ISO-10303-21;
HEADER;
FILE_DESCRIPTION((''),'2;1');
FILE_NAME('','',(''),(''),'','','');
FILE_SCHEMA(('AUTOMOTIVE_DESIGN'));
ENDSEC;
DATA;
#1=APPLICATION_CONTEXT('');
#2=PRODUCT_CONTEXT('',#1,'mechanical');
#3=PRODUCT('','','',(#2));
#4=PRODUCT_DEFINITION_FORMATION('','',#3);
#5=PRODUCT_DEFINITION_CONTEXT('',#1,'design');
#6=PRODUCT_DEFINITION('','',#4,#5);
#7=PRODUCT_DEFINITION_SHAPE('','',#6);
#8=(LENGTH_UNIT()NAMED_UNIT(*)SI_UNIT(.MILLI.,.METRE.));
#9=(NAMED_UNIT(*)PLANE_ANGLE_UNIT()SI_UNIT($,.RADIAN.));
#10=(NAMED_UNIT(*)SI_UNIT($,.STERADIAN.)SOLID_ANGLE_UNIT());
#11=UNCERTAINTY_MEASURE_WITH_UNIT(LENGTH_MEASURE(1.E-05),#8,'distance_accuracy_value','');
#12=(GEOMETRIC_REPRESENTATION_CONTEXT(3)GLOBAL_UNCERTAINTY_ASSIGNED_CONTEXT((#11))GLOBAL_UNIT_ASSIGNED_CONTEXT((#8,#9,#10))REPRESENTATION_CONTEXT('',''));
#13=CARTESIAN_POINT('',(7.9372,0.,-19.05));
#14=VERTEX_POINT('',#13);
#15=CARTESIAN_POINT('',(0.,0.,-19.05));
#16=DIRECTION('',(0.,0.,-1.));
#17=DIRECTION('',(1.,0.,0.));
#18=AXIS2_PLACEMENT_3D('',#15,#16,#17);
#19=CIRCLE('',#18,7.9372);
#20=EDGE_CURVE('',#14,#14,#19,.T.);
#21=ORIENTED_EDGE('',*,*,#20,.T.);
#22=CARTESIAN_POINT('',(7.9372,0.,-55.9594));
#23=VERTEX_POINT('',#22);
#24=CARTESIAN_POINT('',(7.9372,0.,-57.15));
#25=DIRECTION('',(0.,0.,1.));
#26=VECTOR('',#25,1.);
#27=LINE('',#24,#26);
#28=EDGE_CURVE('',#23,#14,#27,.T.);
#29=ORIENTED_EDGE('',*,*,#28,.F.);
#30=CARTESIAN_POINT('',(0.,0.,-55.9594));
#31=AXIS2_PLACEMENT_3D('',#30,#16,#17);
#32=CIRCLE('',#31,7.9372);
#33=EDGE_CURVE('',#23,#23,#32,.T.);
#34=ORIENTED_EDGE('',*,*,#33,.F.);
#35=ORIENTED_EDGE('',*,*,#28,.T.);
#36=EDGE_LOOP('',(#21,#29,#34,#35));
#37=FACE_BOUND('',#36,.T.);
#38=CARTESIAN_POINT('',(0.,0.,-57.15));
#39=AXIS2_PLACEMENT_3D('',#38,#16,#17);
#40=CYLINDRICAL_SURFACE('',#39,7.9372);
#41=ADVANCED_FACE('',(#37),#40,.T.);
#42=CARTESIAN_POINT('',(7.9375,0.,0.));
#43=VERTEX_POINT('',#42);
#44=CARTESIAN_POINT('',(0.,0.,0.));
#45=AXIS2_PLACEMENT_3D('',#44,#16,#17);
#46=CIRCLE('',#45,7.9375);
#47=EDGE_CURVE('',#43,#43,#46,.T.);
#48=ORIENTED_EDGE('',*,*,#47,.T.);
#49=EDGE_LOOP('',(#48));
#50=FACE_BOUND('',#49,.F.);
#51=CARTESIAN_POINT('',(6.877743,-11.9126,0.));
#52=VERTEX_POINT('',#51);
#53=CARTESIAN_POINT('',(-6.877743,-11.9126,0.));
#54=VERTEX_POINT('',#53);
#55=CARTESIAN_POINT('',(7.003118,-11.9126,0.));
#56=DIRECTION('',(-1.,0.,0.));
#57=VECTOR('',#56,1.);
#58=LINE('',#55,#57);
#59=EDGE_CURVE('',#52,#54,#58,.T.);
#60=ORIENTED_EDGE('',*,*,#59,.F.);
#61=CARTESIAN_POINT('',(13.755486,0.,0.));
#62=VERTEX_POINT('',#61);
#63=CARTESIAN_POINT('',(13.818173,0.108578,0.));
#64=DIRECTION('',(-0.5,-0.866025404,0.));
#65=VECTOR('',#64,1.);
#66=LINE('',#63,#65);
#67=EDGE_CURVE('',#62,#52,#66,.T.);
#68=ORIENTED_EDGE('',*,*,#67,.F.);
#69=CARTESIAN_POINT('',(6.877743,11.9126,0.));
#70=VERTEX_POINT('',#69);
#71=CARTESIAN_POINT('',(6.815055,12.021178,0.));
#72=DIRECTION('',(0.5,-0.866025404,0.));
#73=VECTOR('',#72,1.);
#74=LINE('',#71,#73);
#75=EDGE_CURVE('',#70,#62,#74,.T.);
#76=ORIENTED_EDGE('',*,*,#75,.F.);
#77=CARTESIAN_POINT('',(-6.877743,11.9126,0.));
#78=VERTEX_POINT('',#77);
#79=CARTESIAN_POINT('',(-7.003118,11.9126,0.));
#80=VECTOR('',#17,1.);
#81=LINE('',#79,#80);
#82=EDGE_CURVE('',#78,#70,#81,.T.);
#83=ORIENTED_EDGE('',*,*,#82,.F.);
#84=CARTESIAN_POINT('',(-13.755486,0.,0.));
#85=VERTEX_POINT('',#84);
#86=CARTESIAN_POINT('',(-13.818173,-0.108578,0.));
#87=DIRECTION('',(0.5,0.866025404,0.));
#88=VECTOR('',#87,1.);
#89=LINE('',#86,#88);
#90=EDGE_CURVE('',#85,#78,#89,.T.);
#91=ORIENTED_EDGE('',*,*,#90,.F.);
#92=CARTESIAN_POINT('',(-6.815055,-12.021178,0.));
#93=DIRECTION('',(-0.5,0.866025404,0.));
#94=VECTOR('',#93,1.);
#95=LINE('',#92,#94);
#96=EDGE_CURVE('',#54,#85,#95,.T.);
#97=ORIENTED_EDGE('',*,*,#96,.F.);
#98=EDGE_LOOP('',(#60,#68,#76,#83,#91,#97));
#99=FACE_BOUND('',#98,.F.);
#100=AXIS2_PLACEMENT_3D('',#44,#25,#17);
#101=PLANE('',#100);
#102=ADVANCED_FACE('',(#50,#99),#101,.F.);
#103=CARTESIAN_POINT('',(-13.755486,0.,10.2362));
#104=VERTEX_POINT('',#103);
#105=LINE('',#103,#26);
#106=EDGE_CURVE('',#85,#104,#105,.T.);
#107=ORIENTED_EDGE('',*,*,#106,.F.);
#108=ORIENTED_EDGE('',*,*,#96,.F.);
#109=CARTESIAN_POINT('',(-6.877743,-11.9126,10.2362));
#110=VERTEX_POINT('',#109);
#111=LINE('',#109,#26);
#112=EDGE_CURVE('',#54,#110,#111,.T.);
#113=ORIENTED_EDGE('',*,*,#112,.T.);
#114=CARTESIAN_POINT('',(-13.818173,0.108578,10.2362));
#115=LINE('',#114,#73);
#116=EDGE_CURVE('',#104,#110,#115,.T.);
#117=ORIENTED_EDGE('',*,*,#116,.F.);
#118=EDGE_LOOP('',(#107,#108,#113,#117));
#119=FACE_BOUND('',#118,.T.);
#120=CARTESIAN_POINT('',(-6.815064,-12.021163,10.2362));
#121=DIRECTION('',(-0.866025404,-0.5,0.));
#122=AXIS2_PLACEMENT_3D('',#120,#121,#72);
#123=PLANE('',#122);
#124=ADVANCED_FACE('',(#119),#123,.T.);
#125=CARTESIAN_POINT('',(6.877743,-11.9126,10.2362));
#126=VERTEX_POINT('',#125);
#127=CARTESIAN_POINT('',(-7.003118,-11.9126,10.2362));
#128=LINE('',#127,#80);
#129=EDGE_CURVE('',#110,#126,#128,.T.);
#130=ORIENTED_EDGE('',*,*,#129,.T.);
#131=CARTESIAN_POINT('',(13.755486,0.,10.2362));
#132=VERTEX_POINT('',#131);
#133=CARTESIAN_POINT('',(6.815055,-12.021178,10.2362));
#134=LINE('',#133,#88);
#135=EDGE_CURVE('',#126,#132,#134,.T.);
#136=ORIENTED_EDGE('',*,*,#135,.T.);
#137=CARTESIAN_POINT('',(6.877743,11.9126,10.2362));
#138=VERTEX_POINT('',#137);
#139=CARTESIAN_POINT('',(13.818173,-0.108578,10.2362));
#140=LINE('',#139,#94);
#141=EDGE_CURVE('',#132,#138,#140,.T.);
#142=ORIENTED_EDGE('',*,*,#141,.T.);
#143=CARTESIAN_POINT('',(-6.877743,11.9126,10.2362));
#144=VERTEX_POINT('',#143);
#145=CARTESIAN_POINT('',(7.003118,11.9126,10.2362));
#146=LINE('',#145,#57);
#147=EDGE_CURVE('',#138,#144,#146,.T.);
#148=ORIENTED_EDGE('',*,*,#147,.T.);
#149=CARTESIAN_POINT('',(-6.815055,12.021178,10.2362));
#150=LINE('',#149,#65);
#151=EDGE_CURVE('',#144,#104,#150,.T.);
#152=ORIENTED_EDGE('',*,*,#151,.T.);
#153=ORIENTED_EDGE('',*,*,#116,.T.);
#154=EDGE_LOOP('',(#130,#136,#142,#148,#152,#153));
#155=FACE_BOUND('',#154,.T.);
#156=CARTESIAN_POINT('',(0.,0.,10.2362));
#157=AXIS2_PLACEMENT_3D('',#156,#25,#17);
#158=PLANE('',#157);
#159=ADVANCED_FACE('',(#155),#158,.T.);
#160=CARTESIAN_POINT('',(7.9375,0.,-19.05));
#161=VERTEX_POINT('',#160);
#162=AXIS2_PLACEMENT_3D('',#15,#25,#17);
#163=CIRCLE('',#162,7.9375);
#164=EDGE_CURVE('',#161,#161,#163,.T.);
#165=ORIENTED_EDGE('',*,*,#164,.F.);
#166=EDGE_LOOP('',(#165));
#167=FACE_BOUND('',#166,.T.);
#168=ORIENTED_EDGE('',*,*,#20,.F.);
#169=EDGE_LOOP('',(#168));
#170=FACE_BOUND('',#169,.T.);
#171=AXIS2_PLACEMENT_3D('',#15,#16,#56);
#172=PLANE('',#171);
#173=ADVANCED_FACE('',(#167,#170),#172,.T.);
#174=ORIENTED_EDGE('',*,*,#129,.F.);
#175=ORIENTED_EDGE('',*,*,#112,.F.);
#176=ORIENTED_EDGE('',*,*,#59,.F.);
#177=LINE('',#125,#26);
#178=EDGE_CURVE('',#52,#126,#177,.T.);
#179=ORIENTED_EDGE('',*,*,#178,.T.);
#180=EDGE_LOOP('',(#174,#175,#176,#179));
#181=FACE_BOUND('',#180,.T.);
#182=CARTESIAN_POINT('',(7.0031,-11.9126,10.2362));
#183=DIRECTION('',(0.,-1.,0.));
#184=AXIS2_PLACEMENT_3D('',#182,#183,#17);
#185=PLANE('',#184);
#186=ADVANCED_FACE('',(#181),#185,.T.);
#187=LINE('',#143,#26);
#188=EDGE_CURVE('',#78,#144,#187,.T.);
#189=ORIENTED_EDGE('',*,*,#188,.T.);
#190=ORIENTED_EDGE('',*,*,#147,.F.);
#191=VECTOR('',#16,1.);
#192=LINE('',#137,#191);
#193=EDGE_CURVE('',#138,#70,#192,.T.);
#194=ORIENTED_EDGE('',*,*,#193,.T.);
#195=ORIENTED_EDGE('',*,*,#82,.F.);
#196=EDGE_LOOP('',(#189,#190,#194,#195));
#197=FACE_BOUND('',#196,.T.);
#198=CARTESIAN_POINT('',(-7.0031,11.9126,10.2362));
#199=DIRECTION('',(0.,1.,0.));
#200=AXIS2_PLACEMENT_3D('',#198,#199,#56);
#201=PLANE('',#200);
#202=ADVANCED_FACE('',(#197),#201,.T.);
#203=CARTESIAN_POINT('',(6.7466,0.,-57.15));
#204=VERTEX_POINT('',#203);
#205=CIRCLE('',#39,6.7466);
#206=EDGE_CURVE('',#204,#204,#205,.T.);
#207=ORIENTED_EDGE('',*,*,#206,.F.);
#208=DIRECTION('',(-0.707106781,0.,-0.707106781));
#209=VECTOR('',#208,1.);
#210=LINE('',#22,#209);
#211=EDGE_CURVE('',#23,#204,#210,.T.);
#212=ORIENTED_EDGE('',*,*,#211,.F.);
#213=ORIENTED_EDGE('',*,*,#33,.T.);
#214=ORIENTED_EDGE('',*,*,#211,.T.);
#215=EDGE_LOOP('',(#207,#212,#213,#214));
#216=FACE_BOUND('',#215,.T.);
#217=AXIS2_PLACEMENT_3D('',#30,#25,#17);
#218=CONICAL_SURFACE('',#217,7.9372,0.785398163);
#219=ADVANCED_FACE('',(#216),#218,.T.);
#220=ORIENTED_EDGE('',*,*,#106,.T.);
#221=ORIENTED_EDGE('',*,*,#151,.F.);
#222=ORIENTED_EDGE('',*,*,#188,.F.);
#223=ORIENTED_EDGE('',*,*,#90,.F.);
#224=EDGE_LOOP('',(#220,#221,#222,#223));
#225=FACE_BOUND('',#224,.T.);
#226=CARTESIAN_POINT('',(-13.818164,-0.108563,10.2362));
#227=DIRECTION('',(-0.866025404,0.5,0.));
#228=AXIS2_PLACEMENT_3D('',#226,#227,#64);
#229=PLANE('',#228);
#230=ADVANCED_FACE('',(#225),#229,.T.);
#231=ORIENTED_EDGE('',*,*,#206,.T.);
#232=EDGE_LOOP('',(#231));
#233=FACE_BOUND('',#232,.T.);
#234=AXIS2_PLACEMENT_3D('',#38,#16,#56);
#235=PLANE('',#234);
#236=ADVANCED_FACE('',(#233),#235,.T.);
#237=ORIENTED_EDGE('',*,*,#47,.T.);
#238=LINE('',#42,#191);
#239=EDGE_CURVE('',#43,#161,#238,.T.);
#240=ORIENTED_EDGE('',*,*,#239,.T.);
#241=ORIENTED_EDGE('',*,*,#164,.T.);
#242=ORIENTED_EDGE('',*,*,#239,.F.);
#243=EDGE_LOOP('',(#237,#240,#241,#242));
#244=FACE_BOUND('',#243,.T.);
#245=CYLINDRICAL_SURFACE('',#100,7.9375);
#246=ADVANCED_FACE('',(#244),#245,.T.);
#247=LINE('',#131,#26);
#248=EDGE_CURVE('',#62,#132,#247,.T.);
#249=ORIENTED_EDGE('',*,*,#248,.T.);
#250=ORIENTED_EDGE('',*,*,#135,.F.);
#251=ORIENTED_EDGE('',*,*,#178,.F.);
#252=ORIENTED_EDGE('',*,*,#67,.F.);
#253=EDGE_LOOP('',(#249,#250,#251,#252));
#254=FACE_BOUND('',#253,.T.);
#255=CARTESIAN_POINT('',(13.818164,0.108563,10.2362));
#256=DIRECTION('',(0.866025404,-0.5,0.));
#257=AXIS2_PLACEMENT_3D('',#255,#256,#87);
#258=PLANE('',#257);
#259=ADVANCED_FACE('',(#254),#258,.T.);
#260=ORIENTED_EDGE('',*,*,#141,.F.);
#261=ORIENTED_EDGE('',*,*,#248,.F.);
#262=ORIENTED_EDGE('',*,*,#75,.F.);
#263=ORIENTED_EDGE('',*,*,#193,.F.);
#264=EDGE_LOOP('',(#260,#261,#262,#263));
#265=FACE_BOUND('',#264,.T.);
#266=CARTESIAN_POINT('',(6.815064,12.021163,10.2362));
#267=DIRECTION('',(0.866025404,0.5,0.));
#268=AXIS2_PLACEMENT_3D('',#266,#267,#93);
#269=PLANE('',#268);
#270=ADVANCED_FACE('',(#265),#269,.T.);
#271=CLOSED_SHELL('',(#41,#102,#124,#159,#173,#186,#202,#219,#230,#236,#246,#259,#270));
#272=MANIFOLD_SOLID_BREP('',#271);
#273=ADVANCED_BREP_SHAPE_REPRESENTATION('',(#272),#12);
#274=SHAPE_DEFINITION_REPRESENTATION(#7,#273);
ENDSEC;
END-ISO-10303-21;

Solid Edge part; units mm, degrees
sketch "Sketch1" plane through (0, 0, 0) normal (0, 0, 1) x (1, 0, 0)
  circle A0 centre (0, 0) radius 13.8186
  dimension "D1" = 27.6372
extrude "Protrusion1" add sketch "Sketch1" along normal blind 10.2362
sketch "Sketch2" plane through (0, 0, 0) normal (0, 0, -1) x (1, 0, 0)
  circle A0 centre (0, 0) radius 7.9375
extrude "Protrusion2" add sketch "Sketch2" along normal blind 57.15
sketch "Sketch3" plane through (0, 0, -57.15) normal (0, 0, -1) x (1, 0, 0)
  circle A0 centre (0, 0) radius 7.9372
extrude "Cutout1" cut sketch "Sketch3" against normal blind 38.1 flip side to cut
chamfer "Chamfer_1" distance 1.1906 angle 45 1 edges at (-7.9372, 0, -57.15)
sketch "Sketch4" plane through (0, 0, 10.2362) normal (0, 0, 1) x (1, 0, 0)
  line L0 (-7.0031, 11.9126) -> (7.0031, 11.9126)
  dimension "D1" = 23.8252
extrude "Cutout2" cut sketch "Sketch4" against normal up to next material side at (0, 11.9626, 10.2362)
pattern_circular "Pattern1" count 6 over 360 about axis through (0, 0, 10.2362) along (0, 0, 1) of "Cutout2"
properties part number "117620"
